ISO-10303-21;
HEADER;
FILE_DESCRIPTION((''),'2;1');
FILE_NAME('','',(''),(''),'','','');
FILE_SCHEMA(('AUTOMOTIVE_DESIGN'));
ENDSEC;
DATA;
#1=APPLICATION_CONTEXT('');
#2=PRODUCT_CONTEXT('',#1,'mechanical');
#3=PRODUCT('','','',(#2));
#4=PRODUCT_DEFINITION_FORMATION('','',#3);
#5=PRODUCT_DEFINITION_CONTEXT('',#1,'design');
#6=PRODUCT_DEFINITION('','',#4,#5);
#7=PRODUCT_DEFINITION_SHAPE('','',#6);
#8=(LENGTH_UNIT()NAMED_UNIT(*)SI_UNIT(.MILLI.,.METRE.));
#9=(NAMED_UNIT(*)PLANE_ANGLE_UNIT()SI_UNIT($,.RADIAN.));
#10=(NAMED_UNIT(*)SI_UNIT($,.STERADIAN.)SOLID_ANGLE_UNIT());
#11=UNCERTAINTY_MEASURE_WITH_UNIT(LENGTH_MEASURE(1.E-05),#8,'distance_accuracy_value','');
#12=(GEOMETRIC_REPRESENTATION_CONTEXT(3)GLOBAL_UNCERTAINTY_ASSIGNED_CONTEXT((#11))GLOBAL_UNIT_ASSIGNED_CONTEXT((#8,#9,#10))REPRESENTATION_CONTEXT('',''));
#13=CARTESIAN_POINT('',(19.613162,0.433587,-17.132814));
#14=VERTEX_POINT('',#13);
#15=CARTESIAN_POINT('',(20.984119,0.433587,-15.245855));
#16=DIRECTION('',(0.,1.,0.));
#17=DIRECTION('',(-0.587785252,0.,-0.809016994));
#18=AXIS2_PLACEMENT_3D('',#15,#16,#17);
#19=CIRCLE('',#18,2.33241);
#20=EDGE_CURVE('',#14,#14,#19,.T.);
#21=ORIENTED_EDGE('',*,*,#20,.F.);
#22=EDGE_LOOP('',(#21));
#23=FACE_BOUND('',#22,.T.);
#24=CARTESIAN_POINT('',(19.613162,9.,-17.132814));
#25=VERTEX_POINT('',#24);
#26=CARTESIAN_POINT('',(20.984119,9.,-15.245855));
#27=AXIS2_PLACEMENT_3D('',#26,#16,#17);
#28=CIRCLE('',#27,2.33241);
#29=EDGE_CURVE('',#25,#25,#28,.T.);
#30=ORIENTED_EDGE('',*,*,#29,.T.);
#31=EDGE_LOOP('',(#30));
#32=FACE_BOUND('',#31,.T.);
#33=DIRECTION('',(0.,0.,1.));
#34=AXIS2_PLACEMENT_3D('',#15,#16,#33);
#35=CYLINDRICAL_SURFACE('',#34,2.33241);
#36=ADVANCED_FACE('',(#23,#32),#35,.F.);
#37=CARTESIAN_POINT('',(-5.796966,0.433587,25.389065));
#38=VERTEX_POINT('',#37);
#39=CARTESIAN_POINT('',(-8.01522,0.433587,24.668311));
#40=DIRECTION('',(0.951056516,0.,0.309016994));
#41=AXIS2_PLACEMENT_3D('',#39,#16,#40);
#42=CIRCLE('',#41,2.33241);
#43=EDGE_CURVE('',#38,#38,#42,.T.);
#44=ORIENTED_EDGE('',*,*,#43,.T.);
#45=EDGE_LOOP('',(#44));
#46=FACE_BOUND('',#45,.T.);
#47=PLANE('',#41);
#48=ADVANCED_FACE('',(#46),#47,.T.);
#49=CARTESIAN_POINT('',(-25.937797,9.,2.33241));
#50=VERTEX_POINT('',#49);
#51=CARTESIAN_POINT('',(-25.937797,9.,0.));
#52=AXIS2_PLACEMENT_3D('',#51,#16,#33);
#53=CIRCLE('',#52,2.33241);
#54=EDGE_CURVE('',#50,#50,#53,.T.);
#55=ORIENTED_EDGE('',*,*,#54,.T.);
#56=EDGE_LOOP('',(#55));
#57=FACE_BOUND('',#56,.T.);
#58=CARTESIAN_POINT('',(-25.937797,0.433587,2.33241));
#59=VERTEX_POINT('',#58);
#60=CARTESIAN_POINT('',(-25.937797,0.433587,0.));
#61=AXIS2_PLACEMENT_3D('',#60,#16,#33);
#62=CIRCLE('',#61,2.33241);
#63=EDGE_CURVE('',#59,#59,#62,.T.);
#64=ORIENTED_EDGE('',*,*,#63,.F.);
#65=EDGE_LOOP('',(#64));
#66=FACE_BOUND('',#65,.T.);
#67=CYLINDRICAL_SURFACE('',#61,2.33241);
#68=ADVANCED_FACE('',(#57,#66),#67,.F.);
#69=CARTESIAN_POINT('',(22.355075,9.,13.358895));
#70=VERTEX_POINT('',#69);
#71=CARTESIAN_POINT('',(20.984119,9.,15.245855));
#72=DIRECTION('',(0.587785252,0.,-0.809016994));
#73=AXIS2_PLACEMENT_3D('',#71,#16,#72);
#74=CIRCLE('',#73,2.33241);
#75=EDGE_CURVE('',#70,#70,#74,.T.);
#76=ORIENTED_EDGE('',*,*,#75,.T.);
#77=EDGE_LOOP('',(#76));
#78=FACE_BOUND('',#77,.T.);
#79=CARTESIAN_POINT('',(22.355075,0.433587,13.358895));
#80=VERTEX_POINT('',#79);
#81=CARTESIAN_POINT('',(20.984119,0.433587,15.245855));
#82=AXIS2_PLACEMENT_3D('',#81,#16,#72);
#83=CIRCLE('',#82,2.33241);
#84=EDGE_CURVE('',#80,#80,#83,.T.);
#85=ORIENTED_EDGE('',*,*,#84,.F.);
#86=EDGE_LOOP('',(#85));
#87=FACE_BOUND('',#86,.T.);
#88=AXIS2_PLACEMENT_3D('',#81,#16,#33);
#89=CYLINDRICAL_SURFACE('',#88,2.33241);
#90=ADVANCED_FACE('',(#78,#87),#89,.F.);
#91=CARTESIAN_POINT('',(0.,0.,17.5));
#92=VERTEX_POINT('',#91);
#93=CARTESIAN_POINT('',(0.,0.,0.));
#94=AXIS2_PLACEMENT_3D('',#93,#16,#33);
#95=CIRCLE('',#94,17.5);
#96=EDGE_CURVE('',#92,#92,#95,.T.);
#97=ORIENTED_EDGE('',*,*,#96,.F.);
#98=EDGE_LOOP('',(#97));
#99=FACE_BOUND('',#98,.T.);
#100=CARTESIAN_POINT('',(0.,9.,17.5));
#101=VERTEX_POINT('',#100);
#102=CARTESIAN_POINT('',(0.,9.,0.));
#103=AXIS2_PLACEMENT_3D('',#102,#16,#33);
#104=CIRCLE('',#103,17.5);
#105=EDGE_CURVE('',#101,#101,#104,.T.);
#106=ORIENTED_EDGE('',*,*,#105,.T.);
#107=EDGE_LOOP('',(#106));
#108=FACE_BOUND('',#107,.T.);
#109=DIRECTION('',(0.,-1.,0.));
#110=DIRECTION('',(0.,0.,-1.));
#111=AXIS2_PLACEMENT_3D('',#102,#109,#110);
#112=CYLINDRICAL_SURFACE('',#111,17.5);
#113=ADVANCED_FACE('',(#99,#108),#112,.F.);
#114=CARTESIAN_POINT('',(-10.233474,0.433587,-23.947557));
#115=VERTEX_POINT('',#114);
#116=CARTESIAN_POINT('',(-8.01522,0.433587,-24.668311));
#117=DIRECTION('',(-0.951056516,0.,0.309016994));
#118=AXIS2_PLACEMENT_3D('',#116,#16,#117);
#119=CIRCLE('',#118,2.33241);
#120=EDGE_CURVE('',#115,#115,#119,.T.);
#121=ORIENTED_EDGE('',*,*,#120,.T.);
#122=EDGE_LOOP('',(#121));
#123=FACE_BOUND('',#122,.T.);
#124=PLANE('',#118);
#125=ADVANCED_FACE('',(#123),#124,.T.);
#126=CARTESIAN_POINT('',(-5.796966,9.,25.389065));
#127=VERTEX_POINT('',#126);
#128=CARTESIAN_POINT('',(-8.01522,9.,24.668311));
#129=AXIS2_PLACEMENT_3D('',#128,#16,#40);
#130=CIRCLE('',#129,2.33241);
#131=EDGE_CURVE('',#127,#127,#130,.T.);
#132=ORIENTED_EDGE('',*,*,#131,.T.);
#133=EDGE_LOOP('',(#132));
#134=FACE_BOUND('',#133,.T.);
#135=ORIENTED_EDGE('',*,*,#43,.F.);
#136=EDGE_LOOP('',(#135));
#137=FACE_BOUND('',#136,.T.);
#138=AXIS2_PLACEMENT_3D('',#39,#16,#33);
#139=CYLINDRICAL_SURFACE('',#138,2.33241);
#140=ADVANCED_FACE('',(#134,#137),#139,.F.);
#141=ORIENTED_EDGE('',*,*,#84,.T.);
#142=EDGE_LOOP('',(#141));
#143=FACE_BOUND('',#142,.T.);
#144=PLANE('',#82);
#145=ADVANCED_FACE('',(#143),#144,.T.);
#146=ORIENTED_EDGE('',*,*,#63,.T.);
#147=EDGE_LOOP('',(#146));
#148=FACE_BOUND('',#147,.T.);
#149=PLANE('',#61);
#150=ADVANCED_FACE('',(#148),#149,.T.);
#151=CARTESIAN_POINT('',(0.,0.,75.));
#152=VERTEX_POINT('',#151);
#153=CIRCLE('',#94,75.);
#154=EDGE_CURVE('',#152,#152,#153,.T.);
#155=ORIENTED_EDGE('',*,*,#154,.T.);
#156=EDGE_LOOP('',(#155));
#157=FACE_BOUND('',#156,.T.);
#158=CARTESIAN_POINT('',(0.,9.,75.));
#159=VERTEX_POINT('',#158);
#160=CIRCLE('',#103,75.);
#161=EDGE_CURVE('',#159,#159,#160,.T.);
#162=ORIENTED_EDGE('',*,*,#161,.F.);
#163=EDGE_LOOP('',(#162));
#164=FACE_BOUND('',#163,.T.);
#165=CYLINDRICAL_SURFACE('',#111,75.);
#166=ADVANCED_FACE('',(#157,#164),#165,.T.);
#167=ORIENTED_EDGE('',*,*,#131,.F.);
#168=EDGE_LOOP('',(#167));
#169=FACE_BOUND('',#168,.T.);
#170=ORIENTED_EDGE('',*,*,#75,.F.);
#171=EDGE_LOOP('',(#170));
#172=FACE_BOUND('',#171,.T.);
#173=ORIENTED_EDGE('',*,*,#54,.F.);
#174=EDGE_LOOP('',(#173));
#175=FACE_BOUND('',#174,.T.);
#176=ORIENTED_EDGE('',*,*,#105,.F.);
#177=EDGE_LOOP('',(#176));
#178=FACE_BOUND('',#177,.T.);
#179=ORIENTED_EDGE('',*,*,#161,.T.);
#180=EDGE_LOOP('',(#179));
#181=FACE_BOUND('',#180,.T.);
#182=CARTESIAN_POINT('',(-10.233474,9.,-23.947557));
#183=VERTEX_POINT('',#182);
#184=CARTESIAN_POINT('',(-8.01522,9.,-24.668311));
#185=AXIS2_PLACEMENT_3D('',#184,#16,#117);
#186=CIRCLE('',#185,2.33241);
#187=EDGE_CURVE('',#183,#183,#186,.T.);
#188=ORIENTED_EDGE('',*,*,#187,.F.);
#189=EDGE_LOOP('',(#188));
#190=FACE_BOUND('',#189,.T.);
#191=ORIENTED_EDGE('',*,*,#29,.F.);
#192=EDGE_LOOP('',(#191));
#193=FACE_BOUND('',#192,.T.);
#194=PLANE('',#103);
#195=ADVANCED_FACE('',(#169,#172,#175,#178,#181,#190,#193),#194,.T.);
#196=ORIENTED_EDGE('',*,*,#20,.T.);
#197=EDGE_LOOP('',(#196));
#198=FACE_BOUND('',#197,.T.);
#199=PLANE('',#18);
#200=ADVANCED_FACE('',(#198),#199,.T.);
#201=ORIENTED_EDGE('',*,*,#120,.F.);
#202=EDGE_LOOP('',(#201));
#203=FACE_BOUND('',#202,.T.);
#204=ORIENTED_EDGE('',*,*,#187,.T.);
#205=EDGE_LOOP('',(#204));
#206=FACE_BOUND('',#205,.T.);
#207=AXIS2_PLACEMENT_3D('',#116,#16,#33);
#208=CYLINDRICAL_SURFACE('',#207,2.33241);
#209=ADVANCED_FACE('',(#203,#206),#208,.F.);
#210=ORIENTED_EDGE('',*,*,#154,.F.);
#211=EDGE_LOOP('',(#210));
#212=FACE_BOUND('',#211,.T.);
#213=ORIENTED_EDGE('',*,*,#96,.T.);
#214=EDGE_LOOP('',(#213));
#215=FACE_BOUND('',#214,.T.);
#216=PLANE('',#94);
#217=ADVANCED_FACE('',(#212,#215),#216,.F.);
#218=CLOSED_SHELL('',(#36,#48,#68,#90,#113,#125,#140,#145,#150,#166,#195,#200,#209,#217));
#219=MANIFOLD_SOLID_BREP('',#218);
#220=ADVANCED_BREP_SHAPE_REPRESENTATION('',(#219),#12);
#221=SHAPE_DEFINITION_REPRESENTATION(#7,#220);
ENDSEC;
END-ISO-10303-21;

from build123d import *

# Parameters (mm, degrees)
SKETCH1_R           = 75
BOSS_EXTRUDE1_DEPTH = 9
SKETCH2_R           = 17.5
CUT_EXTRUDE1_DEPTH  = 107.447169995
SKETCH3_R           = 2.332409913
CUT_EXTRUDE2_DEPTH  = 8.566412565
CIRPATTERN1_COUNT   = 5


with BuildPart() as part:
    # Sketch1 → Boss-Extrude1 (new body)
    with BuildSketch(Plane(origin=(0, 0, 0), x_dir=(1, 0, 0), z_dir=(0, 1, 0))):
        Circle(SKETCH1_R)
    extrude(amount=BOSS_EXTRUDE1_DEPTH)

    # Sketch2 → Cut-Extrude1 (cut, through all)
    with BuildSketch(Plane(origin=(0, 0, 0), x_dir=(1, 0, 0), z_dir=(0, 1, 0))):
        Circle(SKETCH2_R)
    extrude(amount=CUT_EXTRUDE1_DEPTH, mode=Mode.SUBTRACT)

    # Sketch3 → Cut-Extrude2 (cut)
    with BuildSketch(Plane(origin=(0, 9, 0), x_dir=(1, 0, 0), z_dir=(0, 1, 0))):
        with Locations((-25.937797065, 0)):
            Circle(SKETCH3_R)
    cut_extrude2 = extrude(amount=-CUT_EXTRUDE2_DEPTH, mode=Mode.SUBTRACT)

    # CirPattern1: Cut-Extrude2 ×5 about axis
    cirpattern1_axis = Axis((0, 0, 0), (0, 1, 0))
    for i in range(1, CIRPATTERN1_COUNT):
        add(cut_extrude2.rotate(cirpattern1_axis, i * 360 / CIRPATTERN1_COUNT), mode=Mode.SUBTRACT)


solid = part.part
